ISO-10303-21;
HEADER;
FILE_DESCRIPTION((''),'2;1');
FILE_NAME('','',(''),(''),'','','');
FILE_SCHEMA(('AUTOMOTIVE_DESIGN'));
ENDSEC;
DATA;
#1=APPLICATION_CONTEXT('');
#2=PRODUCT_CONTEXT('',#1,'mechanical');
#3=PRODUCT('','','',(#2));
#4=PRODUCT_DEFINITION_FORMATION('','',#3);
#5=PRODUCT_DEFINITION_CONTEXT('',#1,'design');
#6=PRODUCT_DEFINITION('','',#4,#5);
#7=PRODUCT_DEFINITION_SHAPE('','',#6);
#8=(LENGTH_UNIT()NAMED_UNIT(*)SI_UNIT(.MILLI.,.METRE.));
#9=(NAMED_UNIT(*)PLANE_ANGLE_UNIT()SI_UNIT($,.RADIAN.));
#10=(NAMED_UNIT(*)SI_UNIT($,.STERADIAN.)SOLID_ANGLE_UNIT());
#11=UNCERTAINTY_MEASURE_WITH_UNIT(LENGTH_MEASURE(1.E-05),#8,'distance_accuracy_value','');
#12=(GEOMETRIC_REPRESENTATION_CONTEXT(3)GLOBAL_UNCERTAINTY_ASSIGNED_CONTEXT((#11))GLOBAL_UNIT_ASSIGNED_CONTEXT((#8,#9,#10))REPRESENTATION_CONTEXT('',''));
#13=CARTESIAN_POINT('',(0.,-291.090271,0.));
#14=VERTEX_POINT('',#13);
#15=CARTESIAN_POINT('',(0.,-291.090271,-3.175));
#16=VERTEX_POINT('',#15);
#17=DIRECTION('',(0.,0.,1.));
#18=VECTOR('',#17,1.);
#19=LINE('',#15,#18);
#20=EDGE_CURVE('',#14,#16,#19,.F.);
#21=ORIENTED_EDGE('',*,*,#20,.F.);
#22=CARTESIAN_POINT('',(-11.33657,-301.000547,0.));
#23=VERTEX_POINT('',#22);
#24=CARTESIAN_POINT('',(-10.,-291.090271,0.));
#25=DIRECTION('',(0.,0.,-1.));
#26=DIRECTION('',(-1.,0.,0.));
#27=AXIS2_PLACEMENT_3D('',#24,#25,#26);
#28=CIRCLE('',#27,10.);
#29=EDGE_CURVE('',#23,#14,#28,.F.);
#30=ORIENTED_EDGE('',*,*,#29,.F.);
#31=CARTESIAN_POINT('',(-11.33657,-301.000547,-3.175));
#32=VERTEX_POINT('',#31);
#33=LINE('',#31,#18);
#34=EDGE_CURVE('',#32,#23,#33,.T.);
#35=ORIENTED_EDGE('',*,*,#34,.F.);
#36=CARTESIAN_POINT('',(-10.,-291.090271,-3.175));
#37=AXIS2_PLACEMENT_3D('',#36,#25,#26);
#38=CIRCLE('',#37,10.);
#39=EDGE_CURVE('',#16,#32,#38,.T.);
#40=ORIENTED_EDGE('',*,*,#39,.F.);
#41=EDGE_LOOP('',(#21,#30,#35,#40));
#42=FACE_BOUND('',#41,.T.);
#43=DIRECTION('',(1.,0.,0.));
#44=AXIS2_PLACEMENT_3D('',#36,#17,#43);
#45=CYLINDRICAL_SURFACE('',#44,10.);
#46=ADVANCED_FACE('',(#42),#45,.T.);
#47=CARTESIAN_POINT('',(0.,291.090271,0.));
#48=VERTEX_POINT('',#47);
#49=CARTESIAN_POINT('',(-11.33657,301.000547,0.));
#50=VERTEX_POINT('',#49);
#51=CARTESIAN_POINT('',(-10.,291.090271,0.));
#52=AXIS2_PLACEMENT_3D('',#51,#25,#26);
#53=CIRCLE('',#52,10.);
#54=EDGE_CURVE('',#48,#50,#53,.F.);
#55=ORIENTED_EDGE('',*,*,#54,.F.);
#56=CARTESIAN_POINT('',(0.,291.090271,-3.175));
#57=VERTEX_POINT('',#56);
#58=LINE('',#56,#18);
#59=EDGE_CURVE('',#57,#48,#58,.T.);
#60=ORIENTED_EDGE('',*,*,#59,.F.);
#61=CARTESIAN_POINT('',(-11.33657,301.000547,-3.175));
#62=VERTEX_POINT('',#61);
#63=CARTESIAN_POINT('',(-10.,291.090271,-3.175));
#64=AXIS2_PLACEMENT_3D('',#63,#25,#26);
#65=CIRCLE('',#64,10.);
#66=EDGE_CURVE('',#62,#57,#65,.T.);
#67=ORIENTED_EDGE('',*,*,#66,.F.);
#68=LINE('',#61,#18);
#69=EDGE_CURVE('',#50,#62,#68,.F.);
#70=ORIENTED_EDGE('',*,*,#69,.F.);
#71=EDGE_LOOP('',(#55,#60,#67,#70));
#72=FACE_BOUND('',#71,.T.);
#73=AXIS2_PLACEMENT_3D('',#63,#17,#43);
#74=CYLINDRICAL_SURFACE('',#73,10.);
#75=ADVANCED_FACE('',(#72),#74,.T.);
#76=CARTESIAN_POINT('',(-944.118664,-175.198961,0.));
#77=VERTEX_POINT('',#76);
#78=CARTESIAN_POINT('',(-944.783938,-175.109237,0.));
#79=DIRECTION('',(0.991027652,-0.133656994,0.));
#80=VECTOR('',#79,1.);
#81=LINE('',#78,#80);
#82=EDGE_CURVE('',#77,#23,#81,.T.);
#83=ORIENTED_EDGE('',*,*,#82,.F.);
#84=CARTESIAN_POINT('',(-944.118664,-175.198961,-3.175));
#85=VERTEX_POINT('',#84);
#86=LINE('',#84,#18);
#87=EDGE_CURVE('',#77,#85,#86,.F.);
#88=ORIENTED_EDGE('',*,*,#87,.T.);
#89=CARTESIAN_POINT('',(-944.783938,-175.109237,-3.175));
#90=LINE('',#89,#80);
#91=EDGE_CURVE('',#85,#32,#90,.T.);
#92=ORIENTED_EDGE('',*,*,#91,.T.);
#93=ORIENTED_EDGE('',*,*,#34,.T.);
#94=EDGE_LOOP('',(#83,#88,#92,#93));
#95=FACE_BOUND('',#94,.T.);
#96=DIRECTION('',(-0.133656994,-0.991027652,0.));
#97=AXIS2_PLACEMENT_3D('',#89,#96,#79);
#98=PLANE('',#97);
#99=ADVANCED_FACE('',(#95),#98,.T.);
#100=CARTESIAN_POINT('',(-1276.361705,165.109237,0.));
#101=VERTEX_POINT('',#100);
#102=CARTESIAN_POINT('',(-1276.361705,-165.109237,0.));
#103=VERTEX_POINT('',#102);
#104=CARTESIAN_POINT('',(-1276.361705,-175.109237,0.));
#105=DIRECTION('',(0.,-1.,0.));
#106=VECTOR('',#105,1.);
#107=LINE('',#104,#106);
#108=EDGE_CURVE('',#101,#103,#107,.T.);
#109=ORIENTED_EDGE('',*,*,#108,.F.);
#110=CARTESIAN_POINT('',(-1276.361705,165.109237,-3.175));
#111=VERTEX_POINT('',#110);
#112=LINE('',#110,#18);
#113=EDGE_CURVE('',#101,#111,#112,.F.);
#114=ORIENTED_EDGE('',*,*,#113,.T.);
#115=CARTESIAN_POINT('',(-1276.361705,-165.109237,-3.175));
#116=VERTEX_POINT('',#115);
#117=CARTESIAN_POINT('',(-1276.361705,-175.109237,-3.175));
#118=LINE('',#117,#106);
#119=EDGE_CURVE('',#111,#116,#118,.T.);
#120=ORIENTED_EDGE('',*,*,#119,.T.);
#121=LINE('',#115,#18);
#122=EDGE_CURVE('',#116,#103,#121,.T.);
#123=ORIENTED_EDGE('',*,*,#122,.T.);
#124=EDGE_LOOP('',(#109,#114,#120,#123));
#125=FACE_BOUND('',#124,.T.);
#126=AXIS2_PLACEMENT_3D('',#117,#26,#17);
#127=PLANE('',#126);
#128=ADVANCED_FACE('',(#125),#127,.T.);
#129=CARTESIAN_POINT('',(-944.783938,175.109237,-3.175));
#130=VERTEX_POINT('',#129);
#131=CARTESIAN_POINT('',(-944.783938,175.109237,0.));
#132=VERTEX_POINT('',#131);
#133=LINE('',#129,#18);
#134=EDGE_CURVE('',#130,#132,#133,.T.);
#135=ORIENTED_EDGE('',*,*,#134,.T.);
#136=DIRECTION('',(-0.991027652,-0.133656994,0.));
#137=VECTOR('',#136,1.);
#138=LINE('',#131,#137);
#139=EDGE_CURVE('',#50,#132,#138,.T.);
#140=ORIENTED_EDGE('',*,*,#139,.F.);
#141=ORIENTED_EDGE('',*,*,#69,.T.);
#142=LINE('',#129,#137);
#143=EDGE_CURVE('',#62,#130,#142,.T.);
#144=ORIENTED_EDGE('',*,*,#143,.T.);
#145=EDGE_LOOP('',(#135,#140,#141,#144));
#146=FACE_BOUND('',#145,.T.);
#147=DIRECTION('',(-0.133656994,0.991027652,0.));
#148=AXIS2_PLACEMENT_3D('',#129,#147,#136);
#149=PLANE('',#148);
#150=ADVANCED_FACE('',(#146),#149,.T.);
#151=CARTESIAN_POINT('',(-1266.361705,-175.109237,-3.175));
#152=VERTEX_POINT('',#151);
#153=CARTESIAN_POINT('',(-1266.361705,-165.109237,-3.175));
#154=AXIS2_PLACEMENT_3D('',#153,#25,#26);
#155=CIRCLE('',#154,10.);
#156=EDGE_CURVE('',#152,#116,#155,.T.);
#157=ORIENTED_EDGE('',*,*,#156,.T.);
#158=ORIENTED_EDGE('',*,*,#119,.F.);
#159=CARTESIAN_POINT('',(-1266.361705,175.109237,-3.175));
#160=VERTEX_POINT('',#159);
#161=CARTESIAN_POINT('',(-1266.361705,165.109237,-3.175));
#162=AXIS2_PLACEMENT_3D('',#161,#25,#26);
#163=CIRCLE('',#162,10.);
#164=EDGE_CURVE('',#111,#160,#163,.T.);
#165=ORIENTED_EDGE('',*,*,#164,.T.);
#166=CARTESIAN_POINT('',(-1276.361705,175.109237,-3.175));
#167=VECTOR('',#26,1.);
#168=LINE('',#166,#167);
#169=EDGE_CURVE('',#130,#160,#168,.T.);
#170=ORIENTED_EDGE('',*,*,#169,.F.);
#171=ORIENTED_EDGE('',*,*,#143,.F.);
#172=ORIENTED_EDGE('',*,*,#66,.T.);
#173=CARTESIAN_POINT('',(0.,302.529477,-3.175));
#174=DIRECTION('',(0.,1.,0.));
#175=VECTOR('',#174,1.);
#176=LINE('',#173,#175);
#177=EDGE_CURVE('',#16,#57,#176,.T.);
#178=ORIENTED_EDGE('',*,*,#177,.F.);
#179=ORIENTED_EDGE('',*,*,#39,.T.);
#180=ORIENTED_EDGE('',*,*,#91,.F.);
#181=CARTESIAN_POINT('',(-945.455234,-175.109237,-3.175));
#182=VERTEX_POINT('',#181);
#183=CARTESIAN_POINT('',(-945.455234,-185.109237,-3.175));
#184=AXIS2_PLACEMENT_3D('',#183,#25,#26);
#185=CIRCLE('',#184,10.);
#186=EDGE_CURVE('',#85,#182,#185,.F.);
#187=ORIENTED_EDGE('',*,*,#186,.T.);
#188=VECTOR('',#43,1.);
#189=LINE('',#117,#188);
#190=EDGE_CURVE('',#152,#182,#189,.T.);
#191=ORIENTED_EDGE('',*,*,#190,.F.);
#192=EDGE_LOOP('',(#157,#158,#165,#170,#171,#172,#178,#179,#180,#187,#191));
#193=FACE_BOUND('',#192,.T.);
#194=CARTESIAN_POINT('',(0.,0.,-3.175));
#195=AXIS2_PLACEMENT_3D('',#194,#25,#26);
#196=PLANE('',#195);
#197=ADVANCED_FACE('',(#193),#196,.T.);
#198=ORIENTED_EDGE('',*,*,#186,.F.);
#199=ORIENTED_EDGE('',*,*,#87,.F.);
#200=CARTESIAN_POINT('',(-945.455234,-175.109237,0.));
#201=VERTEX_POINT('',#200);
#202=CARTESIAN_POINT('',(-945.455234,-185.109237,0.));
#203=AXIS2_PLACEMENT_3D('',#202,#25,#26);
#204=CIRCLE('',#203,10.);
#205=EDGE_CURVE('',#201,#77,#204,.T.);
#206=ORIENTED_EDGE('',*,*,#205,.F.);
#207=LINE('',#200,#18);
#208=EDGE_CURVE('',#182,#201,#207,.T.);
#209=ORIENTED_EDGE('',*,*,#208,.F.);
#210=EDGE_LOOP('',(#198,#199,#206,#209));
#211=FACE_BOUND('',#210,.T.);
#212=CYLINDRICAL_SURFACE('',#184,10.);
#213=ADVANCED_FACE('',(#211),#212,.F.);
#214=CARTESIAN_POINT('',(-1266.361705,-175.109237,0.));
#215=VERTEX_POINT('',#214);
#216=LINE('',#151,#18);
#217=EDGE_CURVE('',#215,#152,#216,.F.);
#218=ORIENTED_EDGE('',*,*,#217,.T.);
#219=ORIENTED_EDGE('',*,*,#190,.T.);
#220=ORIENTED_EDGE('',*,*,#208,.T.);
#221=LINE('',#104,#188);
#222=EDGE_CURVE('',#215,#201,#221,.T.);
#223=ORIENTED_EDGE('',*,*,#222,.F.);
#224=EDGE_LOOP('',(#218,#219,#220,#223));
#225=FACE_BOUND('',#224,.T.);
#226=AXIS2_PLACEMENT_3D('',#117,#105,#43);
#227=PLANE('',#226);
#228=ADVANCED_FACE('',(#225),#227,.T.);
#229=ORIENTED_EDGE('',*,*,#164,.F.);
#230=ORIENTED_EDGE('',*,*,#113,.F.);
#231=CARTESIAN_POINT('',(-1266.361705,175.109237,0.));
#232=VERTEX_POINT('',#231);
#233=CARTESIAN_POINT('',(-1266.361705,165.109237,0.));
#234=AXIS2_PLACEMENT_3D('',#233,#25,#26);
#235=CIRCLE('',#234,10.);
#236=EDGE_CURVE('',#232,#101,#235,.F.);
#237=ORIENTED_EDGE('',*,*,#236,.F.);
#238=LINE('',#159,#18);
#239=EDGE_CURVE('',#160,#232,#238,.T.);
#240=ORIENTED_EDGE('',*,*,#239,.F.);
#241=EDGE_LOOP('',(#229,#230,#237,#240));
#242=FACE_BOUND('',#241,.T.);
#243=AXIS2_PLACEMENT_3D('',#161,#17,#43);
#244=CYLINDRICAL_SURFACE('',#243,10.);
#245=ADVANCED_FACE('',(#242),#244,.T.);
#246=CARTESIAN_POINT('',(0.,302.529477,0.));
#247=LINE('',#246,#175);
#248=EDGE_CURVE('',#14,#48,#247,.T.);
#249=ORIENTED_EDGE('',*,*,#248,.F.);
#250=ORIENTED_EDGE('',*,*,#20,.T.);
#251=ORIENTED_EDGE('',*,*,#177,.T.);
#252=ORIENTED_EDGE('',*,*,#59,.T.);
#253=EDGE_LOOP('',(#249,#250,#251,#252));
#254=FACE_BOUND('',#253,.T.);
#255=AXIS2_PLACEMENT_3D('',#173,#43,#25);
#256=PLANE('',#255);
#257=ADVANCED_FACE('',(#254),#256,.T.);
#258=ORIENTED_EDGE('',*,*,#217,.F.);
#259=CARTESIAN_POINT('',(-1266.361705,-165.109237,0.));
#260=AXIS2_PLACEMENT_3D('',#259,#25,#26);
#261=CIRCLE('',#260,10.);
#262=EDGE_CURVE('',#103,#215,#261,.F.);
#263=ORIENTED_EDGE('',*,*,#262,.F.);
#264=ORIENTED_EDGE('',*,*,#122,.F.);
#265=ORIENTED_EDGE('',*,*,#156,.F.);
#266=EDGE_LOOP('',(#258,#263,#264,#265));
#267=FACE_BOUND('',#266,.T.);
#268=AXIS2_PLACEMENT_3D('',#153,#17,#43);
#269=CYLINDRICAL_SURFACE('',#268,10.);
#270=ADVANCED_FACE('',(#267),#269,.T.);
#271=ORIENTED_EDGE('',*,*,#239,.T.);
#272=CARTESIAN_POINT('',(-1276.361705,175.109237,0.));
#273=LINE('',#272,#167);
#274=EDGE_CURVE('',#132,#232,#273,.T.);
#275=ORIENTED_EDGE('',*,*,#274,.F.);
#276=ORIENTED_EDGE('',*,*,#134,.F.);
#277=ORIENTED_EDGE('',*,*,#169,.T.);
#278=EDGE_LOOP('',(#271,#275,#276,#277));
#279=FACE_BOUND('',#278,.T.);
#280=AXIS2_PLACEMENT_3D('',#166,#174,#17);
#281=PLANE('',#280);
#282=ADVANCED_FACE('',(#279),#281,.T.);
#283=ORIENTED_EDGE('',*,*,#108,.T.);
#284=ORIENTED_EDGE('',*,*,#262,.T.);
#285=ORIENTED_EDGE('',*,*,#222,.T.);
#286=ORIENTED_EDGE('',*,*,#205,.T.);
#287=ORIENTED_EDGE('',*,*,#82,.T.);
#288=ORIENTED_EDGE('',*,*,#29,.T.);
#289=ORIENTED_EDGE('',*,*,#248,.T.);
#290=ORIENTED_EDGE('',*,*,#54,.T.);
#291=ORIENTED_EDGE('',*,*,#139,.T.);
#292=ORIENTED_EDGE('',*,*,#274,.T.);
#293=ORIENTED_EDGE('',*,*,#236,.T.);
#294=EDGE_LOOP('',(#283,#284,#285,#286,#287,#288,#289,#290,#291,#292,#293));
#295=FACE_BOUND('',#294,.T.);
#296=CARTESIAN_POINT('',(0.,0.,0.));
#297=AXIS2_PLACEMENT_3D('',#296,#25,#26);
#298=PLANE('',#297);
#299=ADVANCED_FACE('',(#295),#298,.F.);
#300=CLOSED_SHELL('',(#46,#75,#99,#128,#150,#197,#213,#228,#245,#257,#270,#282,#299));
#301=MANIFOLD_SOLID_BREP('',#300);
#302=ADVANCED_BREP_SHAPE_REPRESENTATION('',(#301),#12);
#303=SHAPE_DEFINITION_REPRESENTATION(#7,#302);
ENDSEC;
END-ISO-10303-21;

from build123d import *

# Parameters (mm, degrees)
BASE_FLANGE1_DEPTH = 3.175
FILLET1_R          = 10


# Sheet-metal steps are written as plain solids
with BuildPart() as part:
    # Sketch2 → Base-Flange1 (new body)
    with BuildSketch(Plane.XY):
        Polygon((-1276.361705331, -175.10923744), (-1276.361705331, 175.10923744), (-944.783937855, 175.10923744), (0, 302.529477003), (0, -302.529477003), (-944.783937855, -175.10923744), align=None)
    extrude(amount=-BASE_FLANGE1_DEPTH)

    # Fillet1
    fillet1_edges = [part.edges().sort_by_distance(p)[0] for p in [
        (0, 302.529477003, -1.5875),
        (0, -302.529477003, -1.5875),
        (-944.783937855, -175.10923744, -1.5875),
        (-1276.361705331, -175.10923744, -1.5875),
        (-1276.361705331, 175.10923744, -1.5875),
    ]]
    fillet(fillet1_edges, radius=FILLET1_R)


solid = part.part
